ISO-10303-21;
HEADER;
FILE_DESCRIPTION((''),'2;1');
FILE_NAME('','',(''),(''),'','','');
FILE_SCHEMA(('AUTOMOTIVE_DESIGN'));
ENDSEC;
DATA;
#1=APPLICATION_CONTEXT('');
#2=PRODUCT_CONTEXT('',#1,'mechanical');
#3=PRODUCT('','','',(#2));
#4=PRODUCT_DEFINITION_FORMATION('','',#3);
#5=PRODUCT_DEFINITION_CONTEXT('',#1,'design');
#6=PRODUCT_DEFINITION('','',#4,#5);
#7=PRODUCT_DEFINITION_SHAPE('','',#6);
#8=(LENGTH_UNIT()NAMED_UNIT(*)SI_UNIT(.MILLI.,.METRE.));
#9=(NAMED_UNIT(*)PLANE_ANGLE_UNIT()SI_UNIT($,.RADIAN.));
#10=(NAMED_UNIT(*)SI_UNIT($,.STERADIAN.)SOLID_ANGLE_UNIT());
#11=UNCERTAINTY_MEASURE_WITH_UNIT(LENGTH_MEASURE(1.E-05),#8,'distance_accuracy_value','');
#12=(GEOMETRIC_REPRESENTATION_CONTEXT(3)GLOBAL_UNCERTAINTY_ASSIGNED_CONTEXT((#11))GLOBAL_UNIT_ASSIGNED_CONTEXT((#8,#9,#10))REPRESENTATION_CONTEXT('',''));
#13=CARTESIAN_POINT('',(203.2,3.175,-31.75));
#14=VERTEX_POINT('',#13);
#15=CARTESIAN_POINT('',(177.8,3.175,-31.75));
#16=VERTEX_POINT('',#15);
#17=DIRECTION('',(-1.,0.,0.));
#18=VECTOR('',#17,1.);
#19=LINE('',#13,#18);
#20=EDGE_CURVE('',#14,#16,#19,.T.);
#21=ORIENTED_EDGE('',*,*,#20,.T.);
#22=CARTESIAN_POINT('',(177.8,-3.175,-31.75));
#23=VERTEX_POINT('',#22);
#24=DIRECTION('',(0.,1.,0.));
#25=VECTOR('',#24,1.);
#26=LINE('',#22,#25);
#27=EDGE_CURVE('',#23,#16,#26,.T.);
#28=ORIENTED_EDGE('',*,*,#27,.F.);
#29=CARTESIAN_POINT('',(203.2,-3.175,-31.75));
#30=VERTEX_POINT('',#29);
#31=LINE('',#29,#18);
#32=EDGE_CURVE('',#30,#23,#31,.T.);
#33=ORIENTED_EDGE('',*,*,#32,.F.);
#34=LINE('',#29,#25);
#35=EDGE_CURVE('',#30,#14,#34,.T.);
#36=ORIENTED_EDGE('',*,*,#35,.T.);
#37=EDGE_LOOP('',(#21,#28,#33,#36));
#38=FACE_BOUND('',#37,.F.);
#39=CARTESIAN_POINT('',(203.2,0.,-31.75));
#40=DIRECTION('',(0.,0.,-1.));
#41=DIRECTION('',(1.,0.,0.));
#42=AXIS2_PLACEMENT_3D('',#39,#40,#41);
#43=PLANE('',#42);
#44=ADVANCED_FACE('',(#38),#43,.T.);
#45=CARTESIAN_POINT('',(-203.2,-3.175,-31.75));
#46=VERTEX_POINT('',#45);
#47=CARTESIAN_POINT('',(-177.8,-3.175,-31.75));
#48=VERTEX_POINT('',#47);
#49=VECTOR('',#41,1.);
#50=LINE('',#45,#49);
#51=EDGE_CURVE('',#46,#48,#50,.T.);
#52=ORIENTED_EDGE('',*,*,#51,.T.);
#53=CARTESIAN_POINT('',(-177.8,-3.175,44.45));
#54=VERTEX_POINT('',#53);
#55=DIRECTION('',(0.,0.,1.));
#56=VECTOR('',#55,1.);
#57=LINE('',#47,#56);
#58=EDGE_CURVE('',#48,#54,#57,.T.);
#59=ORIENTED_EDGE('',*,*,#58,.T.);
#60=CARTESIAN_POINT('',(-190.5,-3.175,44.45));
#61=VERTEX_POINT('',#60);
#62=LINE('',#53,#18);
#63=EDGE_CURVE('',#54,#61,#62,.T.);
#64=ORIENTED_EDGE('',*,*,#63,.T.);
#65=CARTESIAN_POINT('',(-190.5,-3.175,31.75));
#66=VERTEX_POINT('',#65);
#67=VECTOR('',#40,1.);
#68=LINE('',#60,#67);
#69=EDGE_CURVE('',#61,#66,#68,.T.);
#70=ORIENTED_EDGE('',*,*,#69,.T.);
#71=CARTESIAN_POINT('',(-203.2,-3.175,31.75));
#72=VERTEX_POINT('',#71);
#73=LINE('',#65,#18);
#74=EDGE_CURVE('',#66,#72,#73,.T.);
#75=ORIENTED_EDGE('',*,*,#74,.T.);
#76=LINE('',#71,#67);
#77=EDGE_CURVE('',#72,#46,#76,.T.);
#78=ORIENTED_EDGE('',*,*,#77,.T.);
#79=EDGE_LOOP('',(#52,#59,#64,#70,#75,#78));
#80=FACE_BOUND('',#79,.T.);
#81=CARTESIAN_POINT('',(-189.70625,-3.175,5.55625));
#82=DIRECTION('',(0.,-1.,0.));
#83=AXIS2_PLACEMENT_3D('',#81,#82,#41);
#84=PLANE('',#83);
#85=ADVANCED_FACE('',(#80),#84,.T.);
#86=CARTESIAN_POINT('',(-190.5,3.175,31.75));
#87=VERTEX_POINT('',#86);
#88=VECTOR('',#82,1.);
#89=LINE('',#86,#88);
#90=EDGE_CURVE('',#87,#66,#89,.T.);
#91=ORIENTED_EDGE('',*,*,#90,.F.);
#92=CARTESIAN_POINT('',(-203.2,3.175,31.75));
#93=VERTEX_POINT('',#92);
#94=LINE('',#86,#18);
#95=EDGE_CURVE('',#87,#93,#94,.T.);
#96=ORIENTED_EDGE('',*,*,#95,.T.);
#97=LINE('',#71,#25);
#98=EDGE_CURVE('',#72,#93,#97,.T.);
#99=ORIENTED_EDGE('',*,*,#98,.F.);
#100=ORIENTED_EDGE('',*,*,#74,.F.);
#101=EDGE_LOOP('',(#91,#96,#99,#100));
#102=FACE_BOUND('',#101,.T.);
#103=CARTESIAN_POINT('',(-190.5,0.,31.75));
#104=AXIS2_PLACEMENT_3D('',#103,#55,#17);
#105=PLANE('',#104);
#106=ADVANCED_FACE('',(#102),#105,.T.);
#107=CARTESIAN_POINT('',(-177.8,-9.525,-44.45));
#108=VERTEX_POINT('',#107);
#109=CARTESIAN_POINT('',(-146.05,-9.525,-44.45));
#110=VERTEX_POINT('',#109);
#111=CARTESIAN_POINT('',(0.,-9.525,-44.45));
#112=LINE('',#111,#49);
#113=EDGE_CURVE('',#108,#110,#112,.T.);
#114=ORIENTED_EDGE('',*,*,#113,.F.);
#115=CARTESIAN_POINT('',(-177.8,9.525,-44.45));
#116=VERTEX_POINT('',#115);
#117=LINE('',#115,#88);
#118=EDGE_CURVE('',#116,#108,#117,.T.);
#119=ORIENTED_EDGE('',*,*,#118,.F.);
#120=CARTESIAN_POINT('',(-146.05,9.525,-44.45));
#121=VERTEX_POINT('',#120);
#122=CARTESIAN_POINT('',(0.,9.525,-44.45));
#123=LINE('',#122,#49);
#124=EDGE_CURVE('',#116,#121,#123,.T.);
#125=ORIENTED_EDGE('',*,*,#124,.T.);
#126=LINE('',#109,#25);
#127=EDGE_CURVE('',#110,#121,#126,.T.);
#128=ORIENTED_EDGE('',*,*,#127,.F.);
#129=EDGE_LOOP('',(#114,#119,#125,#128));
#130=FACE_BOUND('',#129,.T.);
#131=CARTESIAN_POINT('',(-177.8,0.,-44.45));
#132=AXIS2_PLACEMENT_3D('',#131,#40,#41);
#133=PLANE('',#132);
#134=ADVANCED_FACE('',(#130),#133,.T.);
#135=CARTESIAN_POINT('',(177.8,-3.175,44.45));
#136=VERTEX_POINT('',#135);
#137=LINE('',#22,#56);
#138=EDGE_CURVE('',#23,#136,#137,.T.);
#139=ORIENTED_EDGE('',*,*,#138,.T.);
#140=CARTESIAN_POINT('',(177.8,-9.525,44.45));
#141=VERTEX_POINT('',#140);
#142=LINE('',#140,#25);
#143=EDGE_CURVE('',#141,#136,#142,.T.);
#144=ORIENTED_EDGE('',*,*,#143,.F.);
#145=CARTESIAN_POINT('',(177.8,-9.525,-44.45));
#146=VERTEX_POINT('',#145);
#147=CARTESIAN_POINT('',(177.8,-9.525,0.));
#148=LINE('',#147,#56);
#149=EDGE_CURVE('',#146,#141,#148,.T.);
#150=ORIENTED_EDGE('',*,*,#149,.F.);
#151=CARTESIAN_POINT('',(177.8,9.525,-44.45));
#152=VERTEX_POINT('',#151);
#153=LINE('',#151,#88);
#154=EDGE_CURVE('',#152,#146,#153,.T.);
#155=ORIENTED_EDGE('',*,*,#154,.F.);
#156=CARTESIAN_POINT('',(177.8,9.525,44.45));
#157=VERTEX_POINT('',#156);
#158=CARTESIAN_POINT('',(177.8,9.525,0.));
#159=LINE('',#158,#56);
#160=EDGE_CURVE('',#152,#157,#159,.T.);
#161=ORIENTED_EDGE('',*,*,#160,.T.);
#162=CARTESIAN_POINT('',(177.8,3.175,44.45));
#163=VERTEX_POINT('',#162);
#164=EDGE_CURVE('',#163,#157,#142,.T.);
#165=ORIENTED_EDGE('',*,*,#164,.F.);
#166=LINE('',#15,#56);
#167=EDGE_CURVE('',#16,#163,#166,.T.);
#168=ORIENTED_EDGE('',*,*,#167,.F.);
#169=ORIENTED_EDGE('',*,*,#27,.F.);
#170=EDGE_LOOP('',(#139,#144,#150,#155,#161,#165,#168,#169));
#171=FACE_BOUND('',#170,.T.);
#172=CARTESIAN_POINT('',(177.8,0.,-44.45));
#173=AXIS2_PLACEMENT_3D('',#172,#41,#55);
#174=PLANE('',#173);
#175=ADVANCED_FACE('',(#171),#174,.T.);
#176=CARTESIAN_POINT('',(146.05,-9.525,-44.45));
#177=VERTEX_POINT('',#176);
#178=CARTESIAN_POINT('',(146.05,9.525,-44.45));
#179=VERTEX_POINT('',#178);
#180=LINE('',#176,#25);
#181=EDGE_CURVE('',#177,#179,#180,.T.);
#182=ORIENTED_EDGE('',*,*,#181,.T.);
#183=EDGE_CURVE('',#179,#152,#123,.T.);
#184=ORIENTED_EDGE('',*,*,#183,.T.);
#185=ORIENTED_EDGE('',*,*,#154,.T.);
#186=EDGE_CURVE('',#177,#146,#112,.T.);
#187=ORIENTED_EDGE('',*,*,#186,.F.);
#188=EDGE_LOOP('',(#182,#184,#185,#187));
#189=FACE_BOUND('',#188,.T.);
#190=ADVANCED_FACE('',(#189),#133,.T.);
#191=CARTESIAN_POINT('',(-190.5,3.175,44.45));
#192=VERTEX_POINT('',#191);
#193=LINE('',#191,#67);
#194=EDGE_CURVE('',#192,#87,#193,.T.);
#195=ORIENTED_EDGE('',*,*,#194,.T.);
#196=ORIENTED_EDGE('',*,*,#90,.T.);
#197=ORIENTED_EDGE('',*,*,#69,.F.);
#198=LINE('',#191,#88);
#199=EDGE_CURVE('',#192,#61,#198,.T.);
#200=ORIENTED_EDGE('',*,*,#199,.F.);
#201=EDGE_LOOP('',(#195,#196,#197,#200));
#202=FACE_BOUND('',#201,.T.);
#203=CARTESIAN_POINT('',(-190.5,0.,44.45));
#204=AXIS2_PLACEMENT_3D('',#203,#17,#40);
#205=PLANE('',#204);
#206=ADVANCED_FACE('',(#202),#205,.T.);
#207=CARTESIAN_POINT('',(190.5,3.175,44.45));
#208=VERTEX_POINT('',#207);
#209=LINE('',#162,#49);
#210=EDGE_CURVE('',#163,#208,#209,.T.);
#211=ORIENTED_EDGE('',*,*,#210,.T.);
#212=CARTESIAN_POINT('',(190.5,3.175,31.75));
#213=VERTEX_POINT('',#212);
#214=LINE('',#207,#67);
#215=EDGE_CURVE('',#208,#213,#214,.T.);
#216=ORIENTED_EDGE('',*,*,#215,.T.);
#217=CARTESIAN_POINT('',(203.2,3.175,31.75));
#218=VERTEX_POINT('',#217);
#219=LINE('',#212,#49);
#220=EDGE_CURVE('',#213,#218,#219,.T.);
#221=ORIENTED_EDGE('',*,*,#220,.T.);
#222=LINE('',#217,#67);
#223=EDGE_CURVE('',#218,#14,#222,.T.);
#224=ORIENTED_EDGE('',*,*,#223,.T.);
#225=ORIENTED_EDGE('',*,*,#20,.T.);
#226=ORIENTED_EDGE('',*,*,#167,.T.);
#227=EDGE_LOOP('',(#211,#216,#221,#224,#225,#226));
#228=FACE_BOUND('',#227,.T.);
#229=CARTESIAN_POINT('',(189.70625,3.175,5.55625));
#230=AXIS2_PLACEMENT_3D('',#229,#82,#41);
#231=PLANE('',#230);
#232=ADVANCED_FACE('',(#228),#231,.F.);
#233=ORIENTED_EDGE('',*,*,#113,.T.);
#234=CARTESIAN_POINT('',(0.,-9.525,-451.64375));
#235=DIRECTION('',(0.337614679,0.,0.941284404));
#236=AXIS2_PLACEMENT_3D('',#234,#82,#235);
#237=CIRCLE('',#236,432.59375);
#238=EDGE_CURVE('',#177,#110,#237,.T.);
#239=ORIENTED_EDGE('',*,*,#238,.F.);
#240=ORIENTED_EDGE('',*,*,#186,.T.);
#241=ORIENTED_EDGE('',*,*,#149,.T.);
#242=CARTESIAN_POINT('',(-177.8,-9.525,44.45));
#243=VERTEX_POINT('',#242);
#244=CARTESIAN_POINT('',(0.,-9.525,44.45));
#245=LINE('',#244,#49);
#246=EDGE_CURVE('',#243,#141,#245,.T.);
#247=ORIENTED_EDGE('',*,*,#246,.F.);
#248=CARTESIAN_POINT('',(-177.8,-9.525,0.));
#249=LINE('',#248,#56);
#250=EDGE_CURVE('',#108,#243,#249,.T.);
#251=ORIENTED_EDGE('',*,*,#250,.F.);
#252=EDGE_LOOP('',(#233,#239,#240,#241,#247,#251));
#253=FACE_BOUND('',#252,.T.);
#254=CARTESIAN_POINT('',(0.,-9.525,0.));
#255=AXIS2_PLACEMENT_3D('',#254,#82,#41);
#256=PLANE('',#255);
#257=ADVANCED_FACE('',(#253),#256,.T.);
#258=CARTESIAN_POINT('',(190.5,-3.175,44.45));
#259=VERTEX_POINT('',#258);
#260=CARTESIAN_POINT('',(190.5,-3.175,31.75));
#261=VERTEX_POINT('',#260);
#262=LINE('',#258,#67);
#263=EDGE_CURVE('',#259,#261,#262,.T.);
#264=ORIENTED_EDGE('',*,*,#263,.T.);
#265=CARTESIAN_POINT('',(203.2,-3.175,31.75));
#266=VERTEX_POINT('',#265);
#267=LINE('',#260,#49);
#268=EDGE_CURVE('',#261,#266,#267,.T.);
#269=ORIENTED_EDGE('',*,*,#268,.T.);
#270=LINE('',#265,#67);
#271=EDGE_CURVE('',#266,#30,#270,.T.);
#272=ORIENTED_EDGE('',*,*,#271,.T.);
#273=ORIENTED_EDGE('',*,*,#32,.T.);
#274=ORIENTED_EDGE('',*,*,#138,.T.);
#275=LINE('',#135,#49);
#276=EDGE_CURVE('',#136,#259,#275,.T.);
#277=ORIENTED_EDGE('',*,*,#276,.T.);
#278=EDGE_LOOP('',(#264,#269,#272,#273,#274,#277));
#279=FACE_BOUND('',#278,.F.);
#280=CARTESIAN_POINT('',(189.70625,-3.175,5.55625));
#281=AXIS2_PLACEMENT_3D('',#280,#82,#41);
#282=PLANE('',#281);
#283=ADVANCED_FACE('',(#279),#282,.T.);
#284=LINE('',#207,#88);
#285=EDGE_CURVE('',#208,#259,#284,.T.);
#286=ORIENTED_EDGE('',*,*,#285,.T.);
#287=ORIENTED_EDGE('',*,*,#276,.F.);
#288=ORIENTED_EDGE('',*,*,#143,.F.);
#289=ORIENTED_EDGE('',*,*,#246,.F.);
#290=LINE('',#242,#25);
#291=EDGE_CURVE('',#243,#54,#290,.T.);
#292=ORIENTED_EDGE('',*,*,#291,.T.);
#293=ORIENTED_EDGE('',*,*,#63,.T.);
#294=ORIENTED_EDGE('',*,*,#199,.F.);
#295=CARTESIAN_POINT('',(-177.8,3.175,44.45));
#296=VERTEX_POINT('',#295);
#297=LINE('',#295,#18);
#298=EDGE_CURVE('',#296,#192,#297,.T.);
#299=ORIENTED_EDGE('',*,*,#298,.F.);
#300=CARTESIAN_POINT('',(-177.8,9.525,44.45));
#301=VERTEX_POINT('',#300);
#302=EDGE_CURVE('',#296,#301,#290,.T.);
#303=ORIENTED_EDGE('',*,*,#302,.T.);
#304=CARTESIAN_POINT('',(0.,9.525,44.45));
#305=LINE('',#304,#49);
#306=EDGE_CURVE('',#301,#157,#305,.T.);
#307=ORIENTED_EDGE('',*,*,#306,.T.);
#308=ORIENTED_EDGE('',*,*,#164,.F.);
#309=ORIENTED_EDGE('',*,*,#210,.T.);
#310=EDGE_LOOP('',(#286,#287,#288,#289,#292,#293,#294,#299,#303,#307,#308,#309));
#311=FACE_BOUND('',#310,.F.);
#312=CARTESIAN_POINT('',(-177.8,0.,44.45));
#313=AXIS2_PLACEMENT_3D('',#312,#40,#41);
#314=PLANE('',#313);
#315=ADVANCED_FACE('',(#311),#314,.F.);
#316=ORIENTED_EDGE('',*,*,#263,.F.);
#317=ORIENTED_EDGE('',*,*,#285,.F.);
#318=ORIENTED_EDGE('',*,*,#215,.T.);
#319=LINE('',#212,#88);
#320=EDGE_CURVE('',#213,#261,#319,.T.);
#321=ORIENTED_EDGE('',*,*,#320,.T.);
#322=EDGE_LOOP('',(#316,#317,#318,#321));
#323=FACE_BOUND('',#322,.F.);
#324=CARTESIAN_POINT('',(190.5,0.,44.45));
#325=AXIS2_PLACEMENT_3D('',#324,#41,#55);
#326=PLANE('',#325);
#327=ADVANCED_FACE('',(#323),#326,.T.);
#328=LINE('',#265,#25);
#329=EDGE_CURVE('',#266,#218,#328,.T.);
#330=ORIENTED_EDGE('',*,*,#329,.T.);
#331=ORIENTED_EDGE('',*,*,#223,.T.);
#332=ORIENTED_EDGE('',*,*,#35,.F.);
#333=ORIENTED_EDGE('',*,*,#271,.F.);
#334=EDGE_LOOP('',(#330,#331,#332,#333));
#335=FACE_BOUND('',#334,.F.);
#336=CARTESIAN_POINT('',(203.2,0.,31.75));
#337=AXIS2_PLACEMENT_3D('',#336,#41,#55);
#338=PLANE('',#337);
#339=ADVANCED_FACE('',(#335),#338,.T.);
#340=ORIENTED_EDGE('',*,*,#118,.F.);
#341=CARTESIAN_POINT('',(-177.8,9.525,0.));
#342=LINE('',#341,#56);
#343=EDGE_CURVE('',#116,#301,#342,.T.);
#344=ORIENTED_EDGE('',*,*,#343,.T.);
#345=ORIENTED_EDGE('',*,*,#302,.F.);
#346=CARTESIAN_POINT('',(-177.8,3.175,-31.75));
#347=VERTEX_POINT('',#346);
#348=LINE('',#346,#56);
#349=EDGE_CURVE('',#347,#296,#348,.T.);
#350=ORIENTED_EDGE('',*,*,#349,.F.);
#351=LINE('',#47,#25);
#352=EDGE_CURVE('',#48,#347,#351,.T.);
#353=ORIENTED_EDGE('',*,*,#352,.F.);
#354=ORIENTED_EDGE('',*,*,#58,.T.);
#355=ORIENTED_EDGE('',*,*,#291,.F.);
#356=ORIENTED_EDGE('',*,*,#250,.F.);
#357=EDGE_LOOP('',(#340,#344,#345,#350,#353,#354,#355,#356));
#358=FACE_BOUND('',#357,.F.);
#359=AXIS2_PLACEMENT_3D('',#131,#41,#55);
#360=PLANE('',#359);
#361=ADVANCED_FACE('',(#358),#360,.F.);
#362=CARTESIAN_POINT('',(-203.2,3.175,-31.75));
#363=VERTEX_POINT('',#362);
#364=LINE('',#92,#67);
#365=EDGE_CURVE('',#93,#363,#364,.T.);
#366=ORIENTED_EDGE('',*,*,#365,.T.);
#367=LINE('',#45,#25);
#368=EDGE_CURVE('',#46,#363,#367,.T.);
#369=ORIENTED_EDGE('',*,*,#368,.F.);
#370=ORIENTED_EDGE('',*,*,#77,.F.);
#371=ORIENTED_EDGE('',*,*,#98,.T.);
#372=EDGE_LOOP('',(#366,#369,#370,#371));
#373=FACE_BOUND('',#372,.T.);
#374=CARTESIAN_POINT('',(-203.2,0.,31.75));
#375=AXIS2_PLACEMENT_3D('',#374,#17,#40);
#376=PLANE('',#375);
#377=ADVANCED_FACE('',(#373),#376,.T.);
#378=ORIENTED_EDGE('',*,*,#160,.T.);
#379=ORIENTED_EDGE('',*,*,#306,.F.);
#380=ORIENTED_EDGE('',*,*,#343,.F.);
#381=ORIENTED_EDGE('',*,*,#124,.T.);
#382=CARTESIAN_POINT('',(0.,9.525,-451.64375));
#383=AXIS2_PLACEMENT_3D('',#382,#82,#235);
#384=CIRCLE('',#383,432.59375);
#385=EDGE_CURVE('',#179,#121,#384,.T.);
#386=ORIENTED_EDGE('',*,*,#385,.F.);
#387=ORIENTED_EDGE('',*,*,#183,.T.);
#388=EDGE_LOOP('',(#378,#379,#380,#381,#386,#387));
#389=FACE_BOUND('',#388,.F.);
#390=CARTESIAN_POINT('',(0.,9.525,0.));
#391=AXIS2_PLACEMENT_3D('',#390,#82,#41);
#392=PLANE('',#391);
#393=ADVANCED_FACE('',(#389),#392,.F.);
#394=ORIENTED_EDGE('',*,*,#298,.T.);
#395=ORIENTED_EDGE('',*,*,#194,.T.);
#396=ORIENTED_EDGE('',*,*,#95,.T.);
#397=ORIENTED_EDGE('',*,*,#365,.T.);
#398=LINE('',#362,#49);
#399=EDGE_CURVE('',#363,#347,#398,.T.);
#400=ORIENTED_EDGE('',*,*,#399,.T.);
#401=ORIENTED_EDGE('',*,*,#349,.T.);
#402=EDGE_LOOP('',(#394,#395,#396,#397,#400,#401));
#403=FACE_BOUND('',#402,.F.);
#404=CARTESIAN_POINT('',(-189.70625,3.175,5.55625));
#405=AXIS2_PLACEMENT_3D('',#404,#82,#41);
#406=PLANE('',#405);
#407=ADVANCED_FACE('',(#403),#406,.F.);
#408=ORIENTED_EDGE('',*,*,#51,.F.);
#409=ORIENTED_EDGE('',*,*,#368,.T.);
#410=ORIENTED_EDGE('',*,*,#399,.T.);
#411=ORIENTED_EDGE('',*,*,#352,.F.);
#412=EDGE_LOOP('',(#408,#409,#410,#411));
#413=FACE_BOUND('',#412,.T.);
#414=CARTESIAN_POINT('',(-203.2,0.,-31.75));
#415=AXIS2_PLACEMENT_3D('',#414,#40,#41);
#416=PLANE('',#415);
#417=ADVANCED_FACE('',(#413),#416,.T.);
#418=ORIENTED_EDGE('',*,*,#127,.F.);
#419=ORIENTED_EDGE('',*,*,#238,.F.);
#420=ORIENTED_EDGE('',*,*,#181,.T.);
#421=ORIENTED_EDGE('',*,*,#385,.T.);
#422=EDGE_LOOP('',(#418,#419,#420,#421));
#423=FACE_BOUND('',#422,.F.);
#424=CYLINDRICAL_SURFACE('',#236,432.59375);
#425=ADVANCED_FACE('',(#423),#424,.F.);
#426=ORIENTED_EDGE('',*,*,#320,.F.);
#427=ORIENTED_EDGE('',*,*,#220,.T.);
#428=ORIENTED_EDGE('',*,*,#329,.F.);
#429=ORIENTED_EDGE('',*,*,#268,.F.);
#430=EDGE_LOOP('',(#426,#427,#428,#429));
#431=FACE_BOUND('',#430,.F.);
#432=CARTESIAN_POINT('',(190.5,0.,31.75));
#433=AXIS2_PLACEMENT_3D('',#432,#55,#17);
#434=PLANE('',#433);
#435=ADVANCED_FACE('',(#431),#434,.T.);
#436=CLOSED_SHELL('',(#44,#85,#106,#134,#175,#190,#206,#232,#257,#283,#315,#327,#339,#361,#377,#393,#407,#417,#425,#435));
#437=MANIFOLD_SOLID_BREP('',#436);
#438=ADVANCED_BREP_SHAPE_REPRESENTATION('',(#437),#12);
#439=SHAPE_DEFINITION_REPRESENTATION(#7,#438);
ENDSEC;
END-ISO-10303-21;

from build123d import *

# Parameters (mm, degrees)
F0_W     = 355.6
F0_H     = 88.9
F1_DEPTH = 9.525
F3_DEPTH = 3.175
F5_DEPTH = 19.05


# Not quite as in the source:
# - a pattern or mirror of a feature is missing from the dataset's text; its kind, count and spacing are read off the source's solid


with BuildPart() as f1:
    # F0 (on Front) → F1 (new body, symmetric)
    with BuildSketch(Plane.XZ):
        Rectangle(F0_W, F0_H)
    extrude(amount=F1_DEPTH, both=True)

    # F2 (on Front) → F3 (join, symmetric)
    with BuildSketch(Plane.XZ):
        Polygon((-177.8, -31.75), (-177.8, 44.45), (-190.5, 44.45), (-190.5, 31.75), (-203.2, 31.75), (-203.2, -31.75), align=None)
    f3 = extrude(amount=F3_DEPTH, both=True)

    # F3_copies: F3 across plane
    add(f3.mirror(Plane(origin=(0, 0, 0), x_dir=(0, 0, 1), z_dir=(1, 0, 0))))

    # F4 (on face) → F5 (cut, through all)
    with BuildSketch(Plane.XZ.offset(9.525)):
        with BuildLine():
            ThreePointArc((146.05, -44.45), (0, -19.05), (-146.05, -44.45))
            Line((-146.05, -44.45), (146.05, -44.45))
        make_face()
    extrude(amount=-F5_DEPTH, mode=Mode.SUBTRACT)


solid = f1.part
